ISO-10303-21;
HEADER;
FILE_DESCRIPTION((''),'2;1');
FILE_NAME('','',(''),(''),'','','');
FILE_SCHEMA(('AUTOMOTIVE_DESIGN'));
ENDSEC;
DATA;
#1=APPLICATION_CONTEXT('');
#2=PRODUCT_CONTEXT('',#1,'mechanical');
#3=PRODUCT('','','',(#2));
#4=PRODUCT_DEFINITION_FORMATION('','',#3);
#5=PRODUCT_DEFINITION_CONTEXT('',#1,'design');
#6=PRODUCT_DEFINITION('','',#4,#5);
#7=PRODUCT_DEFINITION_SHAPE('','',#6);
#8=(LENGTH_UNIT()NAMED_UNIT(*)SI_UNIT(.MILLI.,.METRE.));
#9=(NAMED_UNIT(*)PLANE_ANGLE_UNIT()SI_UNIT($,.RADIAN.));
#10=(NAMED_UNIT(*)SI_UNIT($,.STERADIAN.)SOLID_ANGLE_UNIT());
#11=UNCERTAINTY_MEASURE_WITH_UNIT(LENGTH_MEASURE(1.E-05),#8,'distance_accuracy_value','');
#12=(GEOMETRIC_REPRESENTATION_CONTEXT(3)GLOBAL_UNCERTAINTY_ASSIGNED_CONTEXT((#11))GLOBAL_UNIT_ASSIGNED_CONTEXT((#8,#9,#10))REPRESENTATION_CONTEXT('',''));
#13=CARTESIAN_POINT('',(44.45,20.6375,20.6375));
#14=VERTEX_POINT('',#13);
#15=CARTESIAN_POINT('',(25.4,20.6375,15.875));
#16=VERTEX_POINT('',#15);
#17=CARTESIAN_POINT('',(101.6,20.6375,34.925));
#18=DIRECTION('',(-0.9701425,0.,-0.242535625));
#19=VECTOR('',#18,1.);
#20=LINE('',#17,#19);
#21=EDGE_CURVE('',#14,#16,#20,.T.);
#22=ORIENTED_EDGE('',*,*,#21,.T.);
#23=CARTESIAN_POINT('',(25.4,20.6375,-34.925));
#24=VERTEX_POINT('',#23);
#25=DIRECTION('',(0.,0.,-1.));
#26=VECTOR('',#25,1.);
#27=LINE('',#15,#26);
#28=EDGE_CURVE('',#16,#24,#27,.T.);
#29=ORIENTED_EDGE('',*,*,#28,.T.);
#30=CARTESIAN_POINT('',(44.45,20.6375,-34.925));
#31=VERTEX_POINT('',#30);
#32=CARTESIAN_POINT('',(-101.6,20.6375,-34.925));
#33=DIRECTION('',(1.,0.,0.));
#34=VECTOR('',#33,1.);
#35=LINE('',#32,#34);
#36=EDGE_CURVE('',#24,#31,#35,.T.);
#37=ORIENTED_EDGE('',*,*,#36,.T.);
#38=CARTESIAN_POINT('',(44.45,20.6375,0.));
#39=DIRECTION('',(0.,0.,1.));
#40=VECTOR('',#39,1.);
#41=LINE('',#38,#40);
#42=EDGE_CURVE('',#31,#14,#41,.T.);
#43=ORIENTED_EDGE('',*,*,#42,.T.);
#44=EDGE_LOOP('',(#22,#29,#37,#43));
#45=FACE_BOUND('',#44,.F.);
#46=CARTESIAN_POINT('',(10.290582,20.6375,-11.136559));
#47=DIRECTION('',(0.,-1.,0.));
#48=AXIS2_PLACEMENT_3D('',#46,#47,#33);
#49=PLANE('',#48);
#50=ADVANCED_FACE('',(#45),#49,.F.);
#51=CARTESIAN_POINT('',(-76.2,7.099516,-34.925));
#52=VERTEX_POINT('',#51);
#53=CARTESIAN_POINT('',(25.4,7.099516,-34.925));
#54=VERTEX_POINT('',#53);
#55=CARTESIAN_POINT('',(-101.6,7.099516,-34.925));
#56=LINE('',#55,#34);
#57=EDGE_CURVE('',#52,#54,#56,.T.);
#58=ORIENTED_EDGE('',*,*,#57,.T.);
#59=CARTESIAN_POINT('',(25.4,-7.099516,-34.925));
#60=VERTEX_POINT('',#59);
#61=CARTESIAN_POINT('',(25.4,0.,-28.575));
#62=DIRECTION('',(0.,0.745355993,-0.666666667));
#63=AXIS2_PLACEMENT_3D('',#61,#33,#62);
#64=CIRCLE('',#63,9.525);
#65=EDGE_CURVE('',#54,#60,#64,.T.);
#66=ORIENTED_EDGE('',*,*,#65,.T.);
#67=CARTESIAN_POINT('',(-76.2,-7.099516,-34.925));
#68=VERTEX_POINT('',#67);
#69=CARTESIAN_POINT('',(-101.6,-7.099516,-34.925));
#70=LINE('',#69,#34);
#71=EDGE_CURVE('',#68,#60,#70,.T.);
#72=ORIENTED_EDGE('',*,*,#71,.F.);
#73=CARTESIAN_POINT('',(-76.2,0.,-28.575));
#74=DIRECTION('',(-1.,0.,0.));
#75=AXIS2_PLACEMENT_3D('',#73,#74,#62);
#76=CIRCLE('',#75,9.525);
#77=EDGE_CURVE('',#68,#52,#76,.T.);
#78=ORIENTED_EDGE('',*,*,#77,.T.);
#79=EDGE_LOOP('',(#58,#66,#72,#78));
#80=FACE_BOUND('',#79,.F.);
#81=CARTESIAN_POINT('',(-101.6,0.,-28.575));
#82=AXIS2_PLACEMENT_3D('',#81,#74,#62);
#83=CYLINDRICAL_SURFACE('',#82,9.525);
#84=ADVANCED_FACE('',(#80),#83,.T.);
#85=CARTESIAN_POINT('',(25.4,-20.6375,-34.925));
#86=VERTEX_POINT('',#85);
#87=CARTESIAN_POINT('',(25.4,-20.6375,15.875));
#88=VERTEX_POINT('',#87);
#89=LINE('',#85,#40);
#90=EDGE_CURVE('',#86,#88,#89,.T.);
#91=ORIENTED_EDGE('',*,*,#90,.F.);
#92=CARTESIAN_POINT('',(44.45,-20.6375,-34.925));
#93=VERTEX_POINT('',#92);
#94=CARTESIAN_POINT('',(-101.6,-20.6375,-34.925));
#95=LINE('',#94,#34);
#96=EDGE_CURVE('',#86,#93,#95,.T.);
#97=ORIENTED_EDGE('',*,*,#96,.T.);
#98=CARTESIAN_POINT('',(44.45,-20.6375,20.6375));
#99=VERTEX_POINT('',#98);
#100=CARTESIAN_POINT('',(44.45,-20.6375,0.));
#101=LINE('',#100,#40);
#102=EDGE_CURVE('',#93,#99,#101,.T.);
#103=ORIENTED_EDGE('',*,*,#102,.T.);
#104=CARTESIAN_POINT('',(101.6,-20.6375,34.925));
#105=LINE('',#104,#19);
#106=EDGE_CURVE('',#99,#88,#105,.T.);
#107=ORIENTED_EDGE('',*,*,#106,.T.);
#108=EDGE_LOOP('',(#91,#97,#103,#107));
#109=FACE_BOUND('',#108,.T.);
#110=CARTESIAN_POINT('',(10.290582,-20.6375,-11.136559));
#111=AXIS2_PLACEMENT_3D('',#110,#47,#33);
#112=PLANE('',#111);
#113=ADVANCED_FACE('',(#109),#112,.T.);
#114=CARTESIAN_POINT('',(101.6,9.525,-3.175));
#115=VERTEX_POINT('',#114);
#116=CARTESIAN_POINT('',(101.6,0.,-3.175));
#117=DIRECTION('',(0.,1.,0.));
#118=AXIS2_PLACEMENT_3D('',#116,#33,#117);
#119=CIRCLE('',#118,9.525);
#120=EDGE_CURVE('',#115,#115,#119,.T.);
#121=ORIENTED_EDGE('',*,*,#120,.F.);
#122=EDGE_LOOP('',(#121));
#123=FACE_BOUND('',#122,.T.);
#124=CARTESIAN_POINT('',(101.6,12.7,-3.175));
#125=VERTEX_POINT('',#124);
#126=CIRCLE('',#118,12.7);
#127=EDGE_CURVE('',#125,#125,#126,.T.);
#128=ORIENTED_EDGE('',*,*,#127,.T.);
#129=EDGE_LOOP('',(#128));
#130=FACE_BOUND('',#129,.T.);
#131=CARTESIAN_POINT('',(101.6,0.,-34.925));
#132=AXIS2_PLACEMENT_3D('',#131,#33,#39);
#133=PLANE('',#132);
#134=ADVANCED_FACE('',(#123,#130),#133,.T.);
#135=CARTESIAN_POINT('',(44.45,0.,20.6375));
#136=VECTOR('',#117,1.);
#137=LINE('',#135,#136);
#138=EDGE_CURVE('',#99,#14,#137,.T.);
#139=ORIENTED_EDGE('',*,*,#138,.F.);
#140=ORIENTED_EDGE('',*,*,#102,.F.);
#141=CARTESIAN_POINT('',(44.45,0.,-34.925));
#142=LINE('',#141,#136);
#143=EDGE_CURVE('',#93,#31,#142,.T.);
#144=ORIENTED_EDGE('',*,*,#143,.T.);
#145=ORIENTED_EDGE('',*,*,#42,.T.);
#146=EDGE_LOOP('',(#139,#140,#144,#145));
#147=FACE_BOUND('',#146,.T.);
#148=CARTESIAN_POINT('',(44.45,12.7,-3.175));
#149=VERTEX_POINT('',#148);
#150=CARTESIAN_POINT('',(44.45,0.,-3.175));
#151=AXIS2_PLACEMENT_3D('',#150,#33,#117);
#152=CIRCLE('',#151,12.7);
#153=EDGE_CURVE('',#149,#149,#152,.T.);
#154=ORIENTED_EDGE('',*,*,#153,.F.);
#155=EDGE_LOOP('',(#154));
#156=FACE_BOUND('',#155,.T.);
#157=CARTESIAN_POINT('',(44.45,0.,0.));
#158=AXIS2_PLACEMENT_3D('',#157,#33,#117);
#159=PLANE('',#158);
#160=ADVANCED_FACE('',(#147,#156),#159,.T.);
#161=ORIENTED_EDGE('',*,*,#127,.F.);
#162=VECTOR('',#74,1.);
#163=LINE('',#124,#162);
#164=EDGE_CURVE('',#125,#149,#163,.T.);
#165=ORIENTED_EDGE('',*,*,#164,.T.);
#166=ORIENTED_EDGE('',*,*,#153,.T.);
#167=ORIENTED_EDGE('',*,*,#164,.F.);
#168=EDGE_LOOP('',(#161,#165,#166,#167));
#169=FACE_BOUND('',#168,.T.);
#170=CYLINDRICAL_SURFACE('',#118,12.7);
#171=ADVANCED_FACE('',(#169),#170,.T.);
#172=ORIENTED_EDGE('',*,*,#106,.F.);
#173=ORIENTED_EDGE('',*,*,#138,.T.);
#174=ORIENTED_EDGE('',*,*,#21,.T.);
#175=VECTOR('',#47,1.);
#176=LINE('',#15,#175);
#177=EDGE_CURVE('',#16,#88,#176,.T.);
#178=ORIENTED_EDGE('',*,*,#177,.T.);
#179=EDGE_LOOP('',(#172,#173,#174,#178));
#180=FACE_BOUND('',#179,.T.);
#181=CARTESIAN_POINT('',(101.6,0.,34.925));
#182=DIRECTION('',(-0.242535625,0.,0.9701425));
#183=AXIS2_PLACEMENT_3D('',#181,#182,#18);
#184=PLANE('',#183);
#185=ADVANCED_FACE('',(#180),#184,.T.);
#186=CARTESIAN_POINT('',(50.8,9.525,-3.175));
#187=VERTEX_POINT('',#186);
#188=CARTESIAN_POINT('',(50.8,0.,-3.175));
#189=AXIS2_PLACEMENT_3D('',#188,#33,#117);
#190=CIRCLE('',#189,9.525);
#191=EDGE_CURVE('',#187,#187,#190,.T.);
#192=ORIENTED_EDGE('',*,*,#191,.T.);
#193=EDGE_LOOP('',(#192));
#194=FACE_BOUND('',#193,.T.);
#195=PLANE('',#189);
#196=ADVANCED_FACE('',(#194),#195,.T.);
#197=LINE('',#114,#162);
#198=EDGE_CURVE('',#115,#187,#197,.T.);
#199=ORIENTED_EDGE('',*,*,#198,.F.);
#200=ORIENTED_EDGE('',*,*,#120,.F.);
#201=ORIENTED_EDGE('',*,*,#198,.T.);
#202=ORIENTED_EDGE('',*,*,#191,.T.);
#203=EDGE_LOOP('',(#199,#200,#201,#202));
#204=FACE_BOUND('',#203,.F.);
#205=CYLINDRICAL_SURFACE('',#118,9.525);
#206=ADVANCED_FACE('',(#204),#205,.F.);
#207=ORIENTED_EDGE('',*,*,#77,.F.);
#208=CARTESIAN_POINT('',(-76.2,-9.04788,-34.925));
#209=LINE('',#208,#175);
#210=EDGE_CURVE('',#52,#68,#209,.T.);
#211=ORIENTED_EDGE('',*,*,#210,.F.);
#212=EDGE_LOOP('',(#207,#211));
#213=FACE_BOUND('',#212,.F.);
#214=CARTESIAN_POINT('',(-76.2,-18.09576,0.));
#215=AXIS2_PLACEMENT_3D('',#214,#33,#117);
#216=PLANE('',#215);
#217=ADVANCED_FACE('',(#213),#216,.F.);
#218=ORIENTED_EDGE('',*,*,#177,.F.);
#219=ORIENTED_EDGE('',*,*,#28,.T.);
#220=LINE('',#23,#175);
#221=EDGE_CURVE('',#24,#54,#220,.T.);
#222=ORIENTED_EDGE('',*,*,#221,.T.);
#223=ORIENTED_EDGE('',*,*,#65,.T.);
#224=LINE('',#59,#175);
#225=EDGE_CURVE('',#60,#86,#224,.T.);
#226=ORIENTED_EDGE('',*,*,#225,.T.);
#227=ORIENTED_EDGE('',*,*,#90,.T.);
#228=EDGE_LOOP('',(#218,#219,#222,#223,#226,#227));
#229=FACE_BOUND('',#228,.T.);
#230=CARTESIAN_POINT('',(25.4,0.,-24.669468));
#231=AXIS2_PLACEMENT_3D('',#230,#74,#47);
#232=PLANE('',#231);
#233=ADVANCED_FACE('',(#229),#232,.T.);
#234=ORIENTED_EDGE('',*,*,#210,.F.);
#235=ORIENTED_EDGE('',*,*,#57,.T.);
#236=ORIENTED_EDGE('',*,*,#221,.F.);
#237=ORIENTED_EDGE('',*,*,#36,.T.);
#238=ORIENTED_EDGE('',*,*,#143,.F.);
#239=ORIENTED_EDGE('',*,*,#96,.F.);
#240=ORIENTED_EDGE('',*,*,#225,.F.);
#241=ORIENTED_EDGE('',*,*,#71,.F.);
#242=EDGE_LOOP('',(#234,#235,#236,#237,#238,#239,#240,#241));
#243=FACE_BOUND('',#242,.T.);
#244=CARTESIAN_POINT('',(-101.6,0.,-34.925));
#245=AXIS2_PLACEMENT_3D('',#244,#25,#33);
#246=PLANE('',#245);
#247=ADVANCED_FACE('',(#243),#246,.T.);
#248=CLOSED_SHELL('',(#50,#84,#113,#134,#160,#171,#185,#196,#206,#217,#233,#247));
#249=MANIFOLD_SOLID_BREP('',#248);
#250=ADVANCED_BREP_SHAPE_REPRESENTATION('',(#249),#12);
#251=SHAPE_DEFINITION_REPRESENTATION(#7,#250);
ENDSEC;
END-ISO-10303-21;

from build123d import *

# Parameters (mm, degrees)
F1_DEPTH  = 20.6375
F2_R      = 9.525
F3_DEPTH  = 50.8
F5_DEPTH  = 127
F7_DEPTH  = 41.276
F8_W      = 41.275
F8_H      = 69.85
F8_R      = 12.7
F9_DEPTH  = 57.15
F10_W     = 25.4
F10_H     = 32.7966427431
F11_DEPTH = 34.926


# Not quite as in the source:
# - a feature names something its author has since deleted; it is built from what else it names


with BuildPart() as f1:
    # F0 (on Front) → F1 (new body, symmetric)
    with BuildSketch(Plane.XZ):
        Polygon((-101.6, -34.925), (101.6, -34.925), (101.6, 34.925), (-101.6, -15.875), align=None)
    extrude(amount=F1_DEPTH, both=True)

    # F2 (on face) → F3 (cut)
    with BuildSketch(Plane.YZ.offset(101.6)):
        with Locations((0, -3.175)):
            Circle(F2_R)
    extrude(amount=-F3_DEPTH, mode=Mode.SUBTRACT)

    # F4 (on face) → F5 (cut)
    with BuildSketch(Plane(origin=(-101.6, 0, 0), x_dir=(0, -1, 0), z_dir=(-1, 0, 0))):
        with BuildLine():
            ThreePointArc((-7.0995158286, -34.925), (0, -19.05), (7.0995158286, -34.925))
            Line((7.0995158286, -34.925), (20.6375, -34.925))
            Line((20.6375, -34.925), (20.6375, -15.875))
            Line((20.6375, -15.875), (-20.6375, -15.875))
            Line((-20.6375, -15.875), (-20.6375, -34.925))
            Line((-20.6375, -34.925), (-7.0995158286, -34.925))
        make_face()
    extrude(amount=-F5_DEPTH, mode=Mode.SUBTRACT)

    # F6 (on face) → F7 (cut, through all)
    with BuildSketch(Plane(origin=(0, 20.6375, 0), x_dir=(-1, 0, 0), z_dir=(0, 1, 0))):
        Polygon((-25.4, 15.875), (-25.4, -15.875), (101.6, -15.875), align=None)
    extrude(amount=-F7_DEPTH, mode=Mode.SUBTRACT)

    # F8 (on face) → F9 (cut)
    with BuildSketch(Plane.YZ.offset(101.6)):
        Rectangle(F8_W, F8_H)
        with Locations((0, -3.175)):
            Circle(F8_R, mode=Mode.SUBTRACT)
    extrude(amount=-F9_DEPTH, mode=Mode.SUBTRACT)

    # F10 (on Top) → F11 (cut, through all)
    with BuildSketch(Plane.XY):
        with Locations((-88.9, -1.6974383034)):
            Rectangle(F10_W, F10_H)
    extrude(amount=-F11_DEPTH, mode=Mode.SUBTRACT)


solid = f1.part
